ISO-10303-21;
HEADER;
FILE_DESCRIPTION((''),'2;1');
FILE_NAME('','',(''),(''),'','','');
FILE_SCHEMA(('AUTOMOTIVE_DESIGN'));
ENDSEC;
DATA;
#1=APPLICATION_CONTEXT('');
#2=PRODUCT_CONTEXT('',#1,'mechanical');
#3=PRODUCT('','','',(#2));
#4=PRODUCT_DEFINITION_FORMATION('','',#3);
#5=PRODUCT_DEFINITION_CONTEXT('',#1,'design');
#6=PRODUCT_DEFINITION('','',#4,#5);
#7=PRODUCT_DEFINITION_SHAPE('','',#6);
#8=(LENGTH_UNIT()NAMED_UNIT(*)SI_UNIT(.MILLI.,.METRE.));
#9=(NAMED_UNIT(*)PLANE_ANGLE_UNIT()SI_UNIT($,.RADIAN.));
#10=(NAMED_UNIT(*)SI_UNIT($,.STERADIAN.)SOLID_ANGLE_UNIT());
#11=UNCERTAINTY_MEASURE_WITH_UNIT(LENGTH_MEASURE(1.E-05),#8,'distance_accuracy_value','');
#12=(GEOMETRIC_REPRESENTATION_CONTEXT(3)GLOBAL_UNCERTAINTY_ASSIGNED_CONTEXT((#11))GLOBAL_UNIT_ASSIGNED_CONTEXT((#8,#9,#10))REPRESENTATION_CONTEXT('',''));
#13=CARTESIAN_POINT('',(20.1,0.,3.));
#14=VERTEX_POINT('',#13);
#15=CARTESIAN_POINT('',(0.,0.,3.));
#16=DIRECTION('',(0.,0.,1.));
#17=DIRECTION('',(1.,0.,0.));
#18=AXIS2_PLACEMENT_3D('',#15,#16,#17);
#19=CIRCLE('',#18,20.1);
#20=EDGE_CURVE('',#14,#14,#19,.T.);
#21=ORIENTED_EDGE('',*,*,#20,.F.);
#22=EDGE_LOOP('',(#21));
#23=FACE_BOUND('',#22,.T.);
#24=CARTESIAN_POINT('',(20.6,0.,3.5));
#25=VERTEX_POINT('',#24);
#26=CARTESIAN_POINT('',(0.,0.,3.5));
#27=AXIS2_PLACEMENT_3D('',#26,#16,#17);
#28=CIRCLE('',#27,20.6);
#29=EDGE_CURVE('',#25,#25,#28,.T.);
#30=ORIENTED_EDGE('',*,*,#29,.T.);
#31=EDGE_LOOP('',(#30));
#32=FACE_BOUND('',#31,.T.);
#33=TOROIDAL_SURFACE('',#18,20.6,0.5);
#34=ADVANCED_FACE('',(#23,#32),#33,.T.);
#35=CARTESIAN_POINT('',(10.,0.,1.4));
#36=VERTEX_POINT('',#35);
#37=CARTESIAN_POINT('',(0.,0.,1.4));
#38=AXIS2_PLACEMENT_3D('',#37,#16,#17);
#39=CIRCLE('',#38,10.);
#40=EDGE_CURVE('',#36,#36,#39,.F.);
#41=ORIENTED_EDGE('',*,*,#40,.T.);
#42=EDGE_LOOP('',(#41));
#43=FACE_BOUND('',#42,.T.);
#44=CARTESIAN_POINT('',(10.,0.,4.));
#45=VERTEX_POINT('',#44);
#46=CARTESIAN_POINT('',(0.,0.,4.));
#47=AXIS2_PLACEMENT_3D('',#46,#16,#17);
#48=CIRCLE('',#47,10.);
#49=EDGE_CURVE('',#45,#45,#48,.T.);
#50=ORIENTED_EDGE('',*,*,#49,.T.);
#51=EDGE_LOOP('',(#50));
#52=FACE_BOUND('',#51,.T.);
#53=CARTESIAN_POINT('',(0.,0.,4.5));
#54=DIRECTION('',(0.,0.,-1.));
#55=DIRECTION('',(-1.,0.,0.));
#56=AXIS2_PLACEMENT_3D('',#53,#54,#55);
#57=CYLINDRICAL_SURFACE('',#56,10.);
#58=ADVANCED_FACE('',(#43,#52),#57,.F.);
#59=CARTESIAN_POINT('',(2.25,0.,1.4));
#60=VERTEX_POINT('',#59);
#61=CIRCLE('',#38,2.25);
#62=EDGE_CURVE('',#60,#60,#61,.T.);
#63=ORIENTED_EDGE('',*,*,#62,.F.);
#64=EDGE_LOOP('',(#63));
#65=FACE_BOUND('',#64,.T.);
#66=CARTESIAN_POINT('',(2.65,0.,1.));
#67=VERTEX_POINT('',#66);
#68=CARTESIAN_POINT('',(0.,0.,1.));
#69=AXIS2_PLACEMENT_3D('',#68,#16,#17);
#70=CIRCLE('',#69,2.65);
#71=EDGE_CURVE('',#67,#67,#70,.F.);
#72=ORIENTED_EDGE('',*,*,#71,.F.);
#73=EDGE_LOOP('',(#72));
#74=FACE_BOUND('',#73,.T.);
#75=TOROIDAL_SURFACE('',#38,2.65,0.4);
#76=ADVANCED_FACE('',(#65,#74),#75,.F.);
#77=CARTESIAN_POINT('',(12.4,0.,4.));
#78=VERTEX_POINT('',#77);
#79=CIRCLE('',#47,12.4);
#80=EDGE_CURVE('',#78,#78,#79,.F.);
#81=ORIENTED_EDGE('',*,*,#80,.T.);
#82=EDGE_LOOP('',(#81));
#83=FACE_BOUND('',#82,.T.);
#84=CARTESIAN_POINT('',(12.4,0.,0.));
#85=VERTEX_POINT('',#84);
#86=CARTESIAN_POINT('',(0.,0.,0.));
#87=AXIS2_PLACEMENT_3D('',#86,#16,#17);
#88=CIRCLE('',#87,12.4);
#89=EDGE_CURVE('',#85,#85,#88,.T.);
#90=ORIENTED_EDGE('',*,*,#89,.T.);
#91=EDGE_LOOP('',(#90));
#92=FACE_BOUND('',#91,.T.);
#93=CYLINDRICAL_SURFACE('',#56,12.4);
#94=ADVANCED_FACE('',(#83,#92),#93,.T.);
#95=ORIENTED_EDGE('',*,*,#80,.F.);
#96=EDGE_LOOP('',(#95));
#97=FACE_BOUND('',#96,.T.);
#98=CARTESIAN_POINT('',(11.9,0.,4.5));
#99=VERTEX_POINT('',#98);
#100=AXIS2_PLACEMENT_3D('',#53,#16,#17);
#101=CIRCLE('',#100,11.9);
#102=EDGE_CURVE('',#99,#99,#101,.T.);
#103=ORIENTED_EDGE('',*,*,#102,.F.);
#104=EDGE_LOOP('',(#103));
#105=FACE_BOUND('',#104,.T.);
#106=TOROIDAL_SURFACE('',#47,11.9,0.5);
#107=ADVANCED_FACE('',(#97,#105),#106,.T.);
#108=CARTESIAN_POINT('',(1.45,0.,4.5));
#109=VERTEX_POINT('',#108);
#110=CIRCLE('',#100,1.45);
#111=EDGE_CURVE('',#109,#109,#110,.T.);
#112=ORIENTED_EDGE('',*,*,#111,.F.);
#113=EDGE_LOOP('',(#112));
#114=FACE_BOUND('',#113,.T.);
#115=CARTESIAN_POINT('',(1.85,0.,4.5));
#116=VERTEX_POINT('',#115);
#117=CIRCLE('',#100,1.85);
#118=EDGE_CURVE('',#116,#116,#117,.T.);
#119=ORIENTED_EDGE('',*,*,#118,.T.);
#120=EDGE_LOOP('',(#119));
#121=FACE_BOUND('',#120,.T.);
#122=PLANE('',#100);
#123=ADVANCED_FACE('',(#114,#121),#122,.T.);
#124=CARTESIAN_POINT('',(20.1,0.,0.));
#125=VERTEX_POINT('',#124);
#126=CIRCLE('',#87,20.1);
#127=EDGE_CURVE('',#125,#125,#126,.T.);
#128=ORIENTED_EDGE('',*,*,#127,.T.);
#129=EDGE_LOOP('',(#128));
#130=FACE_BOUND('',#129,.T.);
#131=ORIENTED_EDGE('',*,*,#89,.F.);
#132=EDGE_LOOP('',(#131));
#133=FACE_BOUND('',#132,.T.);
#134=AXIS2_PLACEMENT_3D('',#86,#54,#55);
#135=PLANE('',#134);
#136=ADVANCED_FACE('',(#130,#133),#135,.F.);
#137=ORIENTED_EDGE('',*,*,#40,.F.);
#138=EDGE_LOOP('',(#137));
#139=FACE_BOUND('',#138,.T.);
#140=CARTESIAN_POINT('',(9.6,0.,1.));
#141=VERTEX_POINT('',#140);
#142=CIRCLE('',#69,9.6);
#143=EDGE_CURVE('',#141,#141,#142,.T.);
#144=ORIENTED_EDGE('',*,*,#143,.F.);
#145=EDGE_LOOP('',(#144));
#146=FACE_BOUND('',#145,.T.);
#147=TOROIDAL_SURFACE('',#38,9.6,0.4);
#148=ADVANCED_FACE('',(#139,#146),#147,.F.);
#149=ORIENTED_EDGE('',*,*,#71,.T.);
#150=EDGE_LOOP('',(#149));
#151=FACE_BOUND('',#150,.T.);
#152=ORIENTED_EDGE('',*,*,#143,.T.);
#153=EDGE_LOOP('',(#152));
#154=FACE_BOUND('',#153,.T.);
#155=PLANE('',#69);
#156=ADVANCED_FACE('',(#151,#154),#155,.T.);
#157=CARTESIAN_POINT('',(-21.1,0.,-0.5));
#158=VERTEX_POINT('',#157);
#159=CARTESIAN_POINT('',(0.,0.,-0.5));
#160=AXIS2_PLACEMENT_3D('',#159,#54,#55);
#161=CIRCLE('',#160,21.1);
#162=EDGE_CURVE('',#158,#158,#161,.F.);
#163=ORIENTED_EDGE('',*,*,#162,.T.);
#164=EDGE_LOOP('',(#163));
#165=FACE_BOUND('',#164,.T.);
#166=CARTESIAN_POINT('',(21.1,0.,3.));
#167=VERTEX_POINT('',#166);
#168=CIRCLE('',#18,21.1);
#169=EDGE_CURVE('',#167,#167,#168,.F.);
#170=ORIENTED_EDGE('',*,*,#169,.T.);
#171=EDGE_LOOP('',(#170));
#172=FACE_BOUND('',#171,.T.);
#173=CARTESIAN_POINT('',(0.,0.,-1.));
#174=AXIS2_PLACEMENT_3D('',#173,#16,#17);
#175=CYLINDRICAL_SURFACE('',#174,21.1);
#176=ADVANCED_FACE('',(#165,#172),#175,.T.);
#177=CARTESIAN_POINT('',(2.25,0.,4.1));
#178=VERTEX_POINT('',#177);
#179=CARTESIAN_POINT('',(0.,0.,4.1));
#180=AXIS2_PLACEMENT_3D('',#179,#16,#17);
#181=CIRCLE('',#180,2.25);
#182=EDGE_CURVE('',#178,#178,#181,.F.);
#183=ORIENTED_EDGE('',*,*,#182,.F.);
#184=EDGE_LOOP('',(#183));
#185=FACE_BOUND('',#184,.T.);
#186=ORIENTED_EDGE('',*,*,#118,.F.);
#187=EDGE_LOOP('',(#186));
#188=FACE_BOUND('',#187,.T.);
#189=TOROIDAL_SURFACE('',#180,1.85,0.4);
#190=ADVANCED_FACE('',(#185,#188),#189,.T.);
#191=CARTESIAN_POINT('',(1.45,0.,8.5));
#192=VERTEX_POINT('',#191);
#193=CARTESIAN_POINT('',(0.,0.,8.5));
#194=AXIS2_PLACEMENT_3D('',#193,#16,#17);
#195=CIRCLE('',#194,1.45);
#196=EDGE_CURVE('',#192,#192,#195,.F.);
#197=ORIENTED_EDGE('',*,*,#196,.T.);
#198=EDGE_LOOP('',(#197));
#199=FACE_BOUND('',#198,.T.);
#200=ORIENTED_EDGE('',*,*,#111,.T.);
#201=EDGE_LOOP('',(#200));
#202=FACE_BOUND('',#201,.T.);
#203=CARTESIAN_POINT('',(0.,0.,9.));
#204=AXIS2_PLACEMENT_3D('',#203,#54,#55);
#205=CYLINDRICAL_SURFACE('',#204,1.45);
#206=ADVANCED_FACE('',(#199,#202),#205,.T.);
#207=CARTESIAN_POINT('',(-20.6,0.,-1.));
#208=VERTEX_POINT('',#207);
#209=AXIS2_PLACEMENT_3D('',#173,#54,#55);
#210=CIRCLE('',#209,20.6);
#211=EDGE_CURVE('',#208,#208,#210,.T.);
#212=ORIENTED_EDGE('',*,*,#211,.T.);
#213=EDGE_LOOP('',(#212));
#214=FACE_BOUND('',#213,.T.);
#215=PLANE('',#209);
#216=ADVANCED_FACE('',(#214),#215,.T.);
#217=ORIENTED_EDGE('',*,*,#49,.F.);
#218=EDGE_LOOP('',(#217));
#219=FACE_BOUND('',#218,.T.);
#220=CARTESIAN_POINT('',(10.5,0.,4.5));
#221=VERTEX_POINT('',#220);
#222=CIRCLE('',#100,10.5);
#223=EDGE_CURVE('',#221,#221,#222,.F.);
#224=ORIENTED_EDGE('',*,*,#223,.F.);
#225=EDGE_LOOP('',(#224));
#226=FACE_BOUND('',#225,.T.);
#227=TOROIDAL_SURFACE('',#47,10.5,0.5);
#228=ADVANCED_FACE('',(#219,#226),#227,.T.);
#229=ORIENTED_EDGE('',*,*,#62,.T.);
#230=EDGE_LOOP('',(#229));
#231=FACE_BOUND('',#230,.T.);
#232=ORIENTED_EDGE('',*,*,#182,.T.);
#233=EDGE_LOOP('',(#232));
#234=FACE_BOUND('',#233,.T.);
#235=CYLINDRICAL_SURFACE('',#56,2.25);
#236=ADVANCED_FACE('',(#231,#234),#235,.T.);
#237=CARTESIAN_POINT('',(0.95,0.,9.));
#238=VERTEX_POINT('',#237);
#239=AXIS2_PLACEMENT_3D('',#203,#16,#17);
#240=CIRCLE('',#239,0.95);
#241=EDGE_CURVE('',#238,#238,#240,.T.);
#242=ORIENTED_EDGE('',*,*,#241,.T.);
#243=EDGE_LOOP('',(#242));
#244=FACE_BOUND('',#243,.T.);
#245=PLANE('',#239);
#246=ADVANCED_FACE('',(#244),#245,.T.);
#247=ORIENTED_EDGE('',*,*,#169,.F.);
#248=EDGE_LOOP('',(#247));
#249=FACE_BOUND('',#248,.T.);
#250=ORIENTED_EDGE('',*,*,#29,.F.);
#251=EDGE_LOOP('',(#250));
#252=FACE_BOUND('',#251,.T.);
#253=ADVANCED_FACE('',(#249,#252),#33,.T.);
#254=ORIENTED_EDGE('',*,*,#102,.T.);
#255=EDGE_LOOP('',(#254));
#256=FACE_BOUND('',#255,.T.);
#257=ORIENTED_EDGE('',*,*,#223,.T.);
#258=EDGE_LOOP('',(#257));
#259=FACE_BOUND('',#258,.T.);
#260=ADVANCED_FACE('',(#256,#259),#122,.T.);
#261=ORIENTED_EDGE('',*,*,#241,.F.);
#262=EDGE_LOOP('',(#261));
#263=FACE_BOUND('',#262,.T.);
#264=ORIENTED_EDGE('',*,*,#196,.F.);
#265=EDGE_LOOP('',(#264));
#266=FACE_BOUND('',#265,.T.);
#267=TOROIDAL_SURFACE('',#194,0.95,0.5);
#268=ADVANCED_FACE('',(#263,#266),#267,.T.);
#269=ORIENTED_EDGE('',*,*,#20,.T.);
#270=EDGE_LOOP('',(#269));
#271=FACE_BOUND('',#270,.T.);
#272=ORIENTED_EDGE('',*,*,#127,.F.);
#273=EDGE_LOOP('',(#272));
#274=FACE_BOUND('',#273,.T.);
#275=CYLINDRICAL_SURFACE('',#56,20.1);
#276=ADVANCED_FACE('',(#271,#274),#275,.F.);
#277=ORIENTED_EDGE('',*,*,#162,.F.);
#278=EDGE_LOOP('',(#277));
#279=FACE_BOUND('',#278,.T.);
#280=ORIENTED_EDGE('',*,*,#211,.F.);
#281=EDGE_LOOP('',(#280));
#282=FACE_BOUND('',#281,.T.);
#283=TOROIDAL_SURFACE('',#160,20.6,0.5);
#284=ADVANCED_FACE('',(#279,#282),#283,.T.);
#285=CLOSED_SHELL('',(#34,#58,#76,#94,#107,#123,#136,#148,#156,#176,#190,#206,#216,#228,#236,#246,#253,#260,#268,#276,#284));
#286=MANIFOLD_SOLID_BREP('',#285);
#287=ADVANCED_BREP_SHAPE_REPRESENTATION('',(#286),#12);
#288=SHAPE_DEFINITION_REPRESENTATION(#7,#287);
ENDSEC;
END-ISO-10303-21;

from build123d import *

# Parameters (mm, degrees)
SKETCH1_R             = 12.4
SKETCH1_R_2           = 10
BOSS_EXTRUDE1_DEPTH   = 4.5
SKETCH1_R_3           = 21.1
SKETCH1_R_4           = 20.1
BOSS_EXTRUDE1_2_DEPTH = 4.5
SKETCH6_R             = 21.1
SKETCH6_R_2           = 20.1
CUT_EXTRUDE1_DEPTH    = 1
SKETCH2_R             = 21.1
BOSS_EXTRUDE2_DEPTH   = 1
SKETCH3_R             = 1.45
BOSS_EXTRUDE3_DEPTH   = 9
FILLET1_R             = 0.5
SKETCH4_R             = 10
BOSS_EXTRUDE4_DEPTH   = 1
SKETCH5_R             = 2.25
BOSS_EXTRUDE5_DEPTH   = 3.5
FILLET2_R             = 0.4


with BuildPart() as part:
    # Sketch1 → Boss-Extrude1 (new body)
    with BuildSketch(Plane.XY):
        Circle(SKETCH1_R)
        Circle(SKETCH1_R_2, mode=Mode.SUBTRACT)
    extrude(amount=BOSS_EXTRUDE1_DEPTH)



with BuildPart() as body_2:
    # Sketch1 → Boss-Extrude1 2 (new body)
    with BuildSketch(Plane.XY):
        Circle(SKETCH1_R_3)
        Circle(SKETCH1_R_4, mode=Mode.SUBTRACT)
    extrude(amount=BOSS_EXTRUDE1_2_DEPTH)

    # Sketch6 → Cut-Extrude1 (cut)
    with BuildSketch(Plane.XY.offset(4.5)):
        Circle(SKETCH6_R)
        Circle(SKETCH6_R_2, mode=Mode.SUBTRACT)
    extrude(amount=-CUT_EXTRUDE1_DEPTH, mode=Mode.SUBTRACT)


with BuildPart() as part_1:
    add(part.part)

    add(body_2.part)  # Boss-Extrude2 merges body 2
    # Sketch2 → Boss-Extrude2 (add)
    with BuildSketch(Plane(origin=(0, 0, 0), x_dir=(-1, 0, 0), z_dir=(0, 0, -1))):
        with Locations(Location((0, 0, 0), (0, 0, 180))):
            Circle(SKETCH2_R)
    extrude(amount=BOSS_EXTRUDE2_DEPTH)

    # Sketch3 → Boss-Extrude3 (add)
    with BuildSketch(Plane.XY):
        with Locations(Location((0, 0, 0), (0, 0, 180))):
            Circle(SKETCH3_R)
    extrude(amount=BOSS_EXTRUDE3_DEPTH)

    # Fillet1
    fillet1_edges = [part_1.edges().sort_by_distance(p)[0] for p in [
        (-12.4, 0, 4.5),
        (-21.1, 0, -1),
        (-20.1, 0, 3.5),
        (-21.1, 0, 3.5),
        (1.45, 0, 9),
        (-10, 0, 4.5),
    ]]
    fillet(fillet1_edges, radius=FILLET1_R - 0.0001)  # a hair under: the kernel refuses the full size

    # Sketch4 → Boss-Extrude4 (add)
    with BuildSketch(Plane.XY):
        Circle(SKETCH4_R)
    extrude(amount=BOSS_EXTRUDE4_DEPTH)

    # Sketch5 → Boss-Extrude5 (add)
    with BuildSketch(Plane.XY.offset(1)):
        Circle(SKETCH5_R)
    extrude(amount=BOSS_EXTRUDE5_DEPTH)

    # Fillet2
    fillet2_edges = [part_1.edges().sort_by_distance(p)[0] for p in [
        (-10, 0, 1),
        (-2.25, 0, 1),
        (-2.25, 0, 4.5),
    ]]
    fillet(fillet2_edges, radius=FILLET2_R)


solid = part_1.part
